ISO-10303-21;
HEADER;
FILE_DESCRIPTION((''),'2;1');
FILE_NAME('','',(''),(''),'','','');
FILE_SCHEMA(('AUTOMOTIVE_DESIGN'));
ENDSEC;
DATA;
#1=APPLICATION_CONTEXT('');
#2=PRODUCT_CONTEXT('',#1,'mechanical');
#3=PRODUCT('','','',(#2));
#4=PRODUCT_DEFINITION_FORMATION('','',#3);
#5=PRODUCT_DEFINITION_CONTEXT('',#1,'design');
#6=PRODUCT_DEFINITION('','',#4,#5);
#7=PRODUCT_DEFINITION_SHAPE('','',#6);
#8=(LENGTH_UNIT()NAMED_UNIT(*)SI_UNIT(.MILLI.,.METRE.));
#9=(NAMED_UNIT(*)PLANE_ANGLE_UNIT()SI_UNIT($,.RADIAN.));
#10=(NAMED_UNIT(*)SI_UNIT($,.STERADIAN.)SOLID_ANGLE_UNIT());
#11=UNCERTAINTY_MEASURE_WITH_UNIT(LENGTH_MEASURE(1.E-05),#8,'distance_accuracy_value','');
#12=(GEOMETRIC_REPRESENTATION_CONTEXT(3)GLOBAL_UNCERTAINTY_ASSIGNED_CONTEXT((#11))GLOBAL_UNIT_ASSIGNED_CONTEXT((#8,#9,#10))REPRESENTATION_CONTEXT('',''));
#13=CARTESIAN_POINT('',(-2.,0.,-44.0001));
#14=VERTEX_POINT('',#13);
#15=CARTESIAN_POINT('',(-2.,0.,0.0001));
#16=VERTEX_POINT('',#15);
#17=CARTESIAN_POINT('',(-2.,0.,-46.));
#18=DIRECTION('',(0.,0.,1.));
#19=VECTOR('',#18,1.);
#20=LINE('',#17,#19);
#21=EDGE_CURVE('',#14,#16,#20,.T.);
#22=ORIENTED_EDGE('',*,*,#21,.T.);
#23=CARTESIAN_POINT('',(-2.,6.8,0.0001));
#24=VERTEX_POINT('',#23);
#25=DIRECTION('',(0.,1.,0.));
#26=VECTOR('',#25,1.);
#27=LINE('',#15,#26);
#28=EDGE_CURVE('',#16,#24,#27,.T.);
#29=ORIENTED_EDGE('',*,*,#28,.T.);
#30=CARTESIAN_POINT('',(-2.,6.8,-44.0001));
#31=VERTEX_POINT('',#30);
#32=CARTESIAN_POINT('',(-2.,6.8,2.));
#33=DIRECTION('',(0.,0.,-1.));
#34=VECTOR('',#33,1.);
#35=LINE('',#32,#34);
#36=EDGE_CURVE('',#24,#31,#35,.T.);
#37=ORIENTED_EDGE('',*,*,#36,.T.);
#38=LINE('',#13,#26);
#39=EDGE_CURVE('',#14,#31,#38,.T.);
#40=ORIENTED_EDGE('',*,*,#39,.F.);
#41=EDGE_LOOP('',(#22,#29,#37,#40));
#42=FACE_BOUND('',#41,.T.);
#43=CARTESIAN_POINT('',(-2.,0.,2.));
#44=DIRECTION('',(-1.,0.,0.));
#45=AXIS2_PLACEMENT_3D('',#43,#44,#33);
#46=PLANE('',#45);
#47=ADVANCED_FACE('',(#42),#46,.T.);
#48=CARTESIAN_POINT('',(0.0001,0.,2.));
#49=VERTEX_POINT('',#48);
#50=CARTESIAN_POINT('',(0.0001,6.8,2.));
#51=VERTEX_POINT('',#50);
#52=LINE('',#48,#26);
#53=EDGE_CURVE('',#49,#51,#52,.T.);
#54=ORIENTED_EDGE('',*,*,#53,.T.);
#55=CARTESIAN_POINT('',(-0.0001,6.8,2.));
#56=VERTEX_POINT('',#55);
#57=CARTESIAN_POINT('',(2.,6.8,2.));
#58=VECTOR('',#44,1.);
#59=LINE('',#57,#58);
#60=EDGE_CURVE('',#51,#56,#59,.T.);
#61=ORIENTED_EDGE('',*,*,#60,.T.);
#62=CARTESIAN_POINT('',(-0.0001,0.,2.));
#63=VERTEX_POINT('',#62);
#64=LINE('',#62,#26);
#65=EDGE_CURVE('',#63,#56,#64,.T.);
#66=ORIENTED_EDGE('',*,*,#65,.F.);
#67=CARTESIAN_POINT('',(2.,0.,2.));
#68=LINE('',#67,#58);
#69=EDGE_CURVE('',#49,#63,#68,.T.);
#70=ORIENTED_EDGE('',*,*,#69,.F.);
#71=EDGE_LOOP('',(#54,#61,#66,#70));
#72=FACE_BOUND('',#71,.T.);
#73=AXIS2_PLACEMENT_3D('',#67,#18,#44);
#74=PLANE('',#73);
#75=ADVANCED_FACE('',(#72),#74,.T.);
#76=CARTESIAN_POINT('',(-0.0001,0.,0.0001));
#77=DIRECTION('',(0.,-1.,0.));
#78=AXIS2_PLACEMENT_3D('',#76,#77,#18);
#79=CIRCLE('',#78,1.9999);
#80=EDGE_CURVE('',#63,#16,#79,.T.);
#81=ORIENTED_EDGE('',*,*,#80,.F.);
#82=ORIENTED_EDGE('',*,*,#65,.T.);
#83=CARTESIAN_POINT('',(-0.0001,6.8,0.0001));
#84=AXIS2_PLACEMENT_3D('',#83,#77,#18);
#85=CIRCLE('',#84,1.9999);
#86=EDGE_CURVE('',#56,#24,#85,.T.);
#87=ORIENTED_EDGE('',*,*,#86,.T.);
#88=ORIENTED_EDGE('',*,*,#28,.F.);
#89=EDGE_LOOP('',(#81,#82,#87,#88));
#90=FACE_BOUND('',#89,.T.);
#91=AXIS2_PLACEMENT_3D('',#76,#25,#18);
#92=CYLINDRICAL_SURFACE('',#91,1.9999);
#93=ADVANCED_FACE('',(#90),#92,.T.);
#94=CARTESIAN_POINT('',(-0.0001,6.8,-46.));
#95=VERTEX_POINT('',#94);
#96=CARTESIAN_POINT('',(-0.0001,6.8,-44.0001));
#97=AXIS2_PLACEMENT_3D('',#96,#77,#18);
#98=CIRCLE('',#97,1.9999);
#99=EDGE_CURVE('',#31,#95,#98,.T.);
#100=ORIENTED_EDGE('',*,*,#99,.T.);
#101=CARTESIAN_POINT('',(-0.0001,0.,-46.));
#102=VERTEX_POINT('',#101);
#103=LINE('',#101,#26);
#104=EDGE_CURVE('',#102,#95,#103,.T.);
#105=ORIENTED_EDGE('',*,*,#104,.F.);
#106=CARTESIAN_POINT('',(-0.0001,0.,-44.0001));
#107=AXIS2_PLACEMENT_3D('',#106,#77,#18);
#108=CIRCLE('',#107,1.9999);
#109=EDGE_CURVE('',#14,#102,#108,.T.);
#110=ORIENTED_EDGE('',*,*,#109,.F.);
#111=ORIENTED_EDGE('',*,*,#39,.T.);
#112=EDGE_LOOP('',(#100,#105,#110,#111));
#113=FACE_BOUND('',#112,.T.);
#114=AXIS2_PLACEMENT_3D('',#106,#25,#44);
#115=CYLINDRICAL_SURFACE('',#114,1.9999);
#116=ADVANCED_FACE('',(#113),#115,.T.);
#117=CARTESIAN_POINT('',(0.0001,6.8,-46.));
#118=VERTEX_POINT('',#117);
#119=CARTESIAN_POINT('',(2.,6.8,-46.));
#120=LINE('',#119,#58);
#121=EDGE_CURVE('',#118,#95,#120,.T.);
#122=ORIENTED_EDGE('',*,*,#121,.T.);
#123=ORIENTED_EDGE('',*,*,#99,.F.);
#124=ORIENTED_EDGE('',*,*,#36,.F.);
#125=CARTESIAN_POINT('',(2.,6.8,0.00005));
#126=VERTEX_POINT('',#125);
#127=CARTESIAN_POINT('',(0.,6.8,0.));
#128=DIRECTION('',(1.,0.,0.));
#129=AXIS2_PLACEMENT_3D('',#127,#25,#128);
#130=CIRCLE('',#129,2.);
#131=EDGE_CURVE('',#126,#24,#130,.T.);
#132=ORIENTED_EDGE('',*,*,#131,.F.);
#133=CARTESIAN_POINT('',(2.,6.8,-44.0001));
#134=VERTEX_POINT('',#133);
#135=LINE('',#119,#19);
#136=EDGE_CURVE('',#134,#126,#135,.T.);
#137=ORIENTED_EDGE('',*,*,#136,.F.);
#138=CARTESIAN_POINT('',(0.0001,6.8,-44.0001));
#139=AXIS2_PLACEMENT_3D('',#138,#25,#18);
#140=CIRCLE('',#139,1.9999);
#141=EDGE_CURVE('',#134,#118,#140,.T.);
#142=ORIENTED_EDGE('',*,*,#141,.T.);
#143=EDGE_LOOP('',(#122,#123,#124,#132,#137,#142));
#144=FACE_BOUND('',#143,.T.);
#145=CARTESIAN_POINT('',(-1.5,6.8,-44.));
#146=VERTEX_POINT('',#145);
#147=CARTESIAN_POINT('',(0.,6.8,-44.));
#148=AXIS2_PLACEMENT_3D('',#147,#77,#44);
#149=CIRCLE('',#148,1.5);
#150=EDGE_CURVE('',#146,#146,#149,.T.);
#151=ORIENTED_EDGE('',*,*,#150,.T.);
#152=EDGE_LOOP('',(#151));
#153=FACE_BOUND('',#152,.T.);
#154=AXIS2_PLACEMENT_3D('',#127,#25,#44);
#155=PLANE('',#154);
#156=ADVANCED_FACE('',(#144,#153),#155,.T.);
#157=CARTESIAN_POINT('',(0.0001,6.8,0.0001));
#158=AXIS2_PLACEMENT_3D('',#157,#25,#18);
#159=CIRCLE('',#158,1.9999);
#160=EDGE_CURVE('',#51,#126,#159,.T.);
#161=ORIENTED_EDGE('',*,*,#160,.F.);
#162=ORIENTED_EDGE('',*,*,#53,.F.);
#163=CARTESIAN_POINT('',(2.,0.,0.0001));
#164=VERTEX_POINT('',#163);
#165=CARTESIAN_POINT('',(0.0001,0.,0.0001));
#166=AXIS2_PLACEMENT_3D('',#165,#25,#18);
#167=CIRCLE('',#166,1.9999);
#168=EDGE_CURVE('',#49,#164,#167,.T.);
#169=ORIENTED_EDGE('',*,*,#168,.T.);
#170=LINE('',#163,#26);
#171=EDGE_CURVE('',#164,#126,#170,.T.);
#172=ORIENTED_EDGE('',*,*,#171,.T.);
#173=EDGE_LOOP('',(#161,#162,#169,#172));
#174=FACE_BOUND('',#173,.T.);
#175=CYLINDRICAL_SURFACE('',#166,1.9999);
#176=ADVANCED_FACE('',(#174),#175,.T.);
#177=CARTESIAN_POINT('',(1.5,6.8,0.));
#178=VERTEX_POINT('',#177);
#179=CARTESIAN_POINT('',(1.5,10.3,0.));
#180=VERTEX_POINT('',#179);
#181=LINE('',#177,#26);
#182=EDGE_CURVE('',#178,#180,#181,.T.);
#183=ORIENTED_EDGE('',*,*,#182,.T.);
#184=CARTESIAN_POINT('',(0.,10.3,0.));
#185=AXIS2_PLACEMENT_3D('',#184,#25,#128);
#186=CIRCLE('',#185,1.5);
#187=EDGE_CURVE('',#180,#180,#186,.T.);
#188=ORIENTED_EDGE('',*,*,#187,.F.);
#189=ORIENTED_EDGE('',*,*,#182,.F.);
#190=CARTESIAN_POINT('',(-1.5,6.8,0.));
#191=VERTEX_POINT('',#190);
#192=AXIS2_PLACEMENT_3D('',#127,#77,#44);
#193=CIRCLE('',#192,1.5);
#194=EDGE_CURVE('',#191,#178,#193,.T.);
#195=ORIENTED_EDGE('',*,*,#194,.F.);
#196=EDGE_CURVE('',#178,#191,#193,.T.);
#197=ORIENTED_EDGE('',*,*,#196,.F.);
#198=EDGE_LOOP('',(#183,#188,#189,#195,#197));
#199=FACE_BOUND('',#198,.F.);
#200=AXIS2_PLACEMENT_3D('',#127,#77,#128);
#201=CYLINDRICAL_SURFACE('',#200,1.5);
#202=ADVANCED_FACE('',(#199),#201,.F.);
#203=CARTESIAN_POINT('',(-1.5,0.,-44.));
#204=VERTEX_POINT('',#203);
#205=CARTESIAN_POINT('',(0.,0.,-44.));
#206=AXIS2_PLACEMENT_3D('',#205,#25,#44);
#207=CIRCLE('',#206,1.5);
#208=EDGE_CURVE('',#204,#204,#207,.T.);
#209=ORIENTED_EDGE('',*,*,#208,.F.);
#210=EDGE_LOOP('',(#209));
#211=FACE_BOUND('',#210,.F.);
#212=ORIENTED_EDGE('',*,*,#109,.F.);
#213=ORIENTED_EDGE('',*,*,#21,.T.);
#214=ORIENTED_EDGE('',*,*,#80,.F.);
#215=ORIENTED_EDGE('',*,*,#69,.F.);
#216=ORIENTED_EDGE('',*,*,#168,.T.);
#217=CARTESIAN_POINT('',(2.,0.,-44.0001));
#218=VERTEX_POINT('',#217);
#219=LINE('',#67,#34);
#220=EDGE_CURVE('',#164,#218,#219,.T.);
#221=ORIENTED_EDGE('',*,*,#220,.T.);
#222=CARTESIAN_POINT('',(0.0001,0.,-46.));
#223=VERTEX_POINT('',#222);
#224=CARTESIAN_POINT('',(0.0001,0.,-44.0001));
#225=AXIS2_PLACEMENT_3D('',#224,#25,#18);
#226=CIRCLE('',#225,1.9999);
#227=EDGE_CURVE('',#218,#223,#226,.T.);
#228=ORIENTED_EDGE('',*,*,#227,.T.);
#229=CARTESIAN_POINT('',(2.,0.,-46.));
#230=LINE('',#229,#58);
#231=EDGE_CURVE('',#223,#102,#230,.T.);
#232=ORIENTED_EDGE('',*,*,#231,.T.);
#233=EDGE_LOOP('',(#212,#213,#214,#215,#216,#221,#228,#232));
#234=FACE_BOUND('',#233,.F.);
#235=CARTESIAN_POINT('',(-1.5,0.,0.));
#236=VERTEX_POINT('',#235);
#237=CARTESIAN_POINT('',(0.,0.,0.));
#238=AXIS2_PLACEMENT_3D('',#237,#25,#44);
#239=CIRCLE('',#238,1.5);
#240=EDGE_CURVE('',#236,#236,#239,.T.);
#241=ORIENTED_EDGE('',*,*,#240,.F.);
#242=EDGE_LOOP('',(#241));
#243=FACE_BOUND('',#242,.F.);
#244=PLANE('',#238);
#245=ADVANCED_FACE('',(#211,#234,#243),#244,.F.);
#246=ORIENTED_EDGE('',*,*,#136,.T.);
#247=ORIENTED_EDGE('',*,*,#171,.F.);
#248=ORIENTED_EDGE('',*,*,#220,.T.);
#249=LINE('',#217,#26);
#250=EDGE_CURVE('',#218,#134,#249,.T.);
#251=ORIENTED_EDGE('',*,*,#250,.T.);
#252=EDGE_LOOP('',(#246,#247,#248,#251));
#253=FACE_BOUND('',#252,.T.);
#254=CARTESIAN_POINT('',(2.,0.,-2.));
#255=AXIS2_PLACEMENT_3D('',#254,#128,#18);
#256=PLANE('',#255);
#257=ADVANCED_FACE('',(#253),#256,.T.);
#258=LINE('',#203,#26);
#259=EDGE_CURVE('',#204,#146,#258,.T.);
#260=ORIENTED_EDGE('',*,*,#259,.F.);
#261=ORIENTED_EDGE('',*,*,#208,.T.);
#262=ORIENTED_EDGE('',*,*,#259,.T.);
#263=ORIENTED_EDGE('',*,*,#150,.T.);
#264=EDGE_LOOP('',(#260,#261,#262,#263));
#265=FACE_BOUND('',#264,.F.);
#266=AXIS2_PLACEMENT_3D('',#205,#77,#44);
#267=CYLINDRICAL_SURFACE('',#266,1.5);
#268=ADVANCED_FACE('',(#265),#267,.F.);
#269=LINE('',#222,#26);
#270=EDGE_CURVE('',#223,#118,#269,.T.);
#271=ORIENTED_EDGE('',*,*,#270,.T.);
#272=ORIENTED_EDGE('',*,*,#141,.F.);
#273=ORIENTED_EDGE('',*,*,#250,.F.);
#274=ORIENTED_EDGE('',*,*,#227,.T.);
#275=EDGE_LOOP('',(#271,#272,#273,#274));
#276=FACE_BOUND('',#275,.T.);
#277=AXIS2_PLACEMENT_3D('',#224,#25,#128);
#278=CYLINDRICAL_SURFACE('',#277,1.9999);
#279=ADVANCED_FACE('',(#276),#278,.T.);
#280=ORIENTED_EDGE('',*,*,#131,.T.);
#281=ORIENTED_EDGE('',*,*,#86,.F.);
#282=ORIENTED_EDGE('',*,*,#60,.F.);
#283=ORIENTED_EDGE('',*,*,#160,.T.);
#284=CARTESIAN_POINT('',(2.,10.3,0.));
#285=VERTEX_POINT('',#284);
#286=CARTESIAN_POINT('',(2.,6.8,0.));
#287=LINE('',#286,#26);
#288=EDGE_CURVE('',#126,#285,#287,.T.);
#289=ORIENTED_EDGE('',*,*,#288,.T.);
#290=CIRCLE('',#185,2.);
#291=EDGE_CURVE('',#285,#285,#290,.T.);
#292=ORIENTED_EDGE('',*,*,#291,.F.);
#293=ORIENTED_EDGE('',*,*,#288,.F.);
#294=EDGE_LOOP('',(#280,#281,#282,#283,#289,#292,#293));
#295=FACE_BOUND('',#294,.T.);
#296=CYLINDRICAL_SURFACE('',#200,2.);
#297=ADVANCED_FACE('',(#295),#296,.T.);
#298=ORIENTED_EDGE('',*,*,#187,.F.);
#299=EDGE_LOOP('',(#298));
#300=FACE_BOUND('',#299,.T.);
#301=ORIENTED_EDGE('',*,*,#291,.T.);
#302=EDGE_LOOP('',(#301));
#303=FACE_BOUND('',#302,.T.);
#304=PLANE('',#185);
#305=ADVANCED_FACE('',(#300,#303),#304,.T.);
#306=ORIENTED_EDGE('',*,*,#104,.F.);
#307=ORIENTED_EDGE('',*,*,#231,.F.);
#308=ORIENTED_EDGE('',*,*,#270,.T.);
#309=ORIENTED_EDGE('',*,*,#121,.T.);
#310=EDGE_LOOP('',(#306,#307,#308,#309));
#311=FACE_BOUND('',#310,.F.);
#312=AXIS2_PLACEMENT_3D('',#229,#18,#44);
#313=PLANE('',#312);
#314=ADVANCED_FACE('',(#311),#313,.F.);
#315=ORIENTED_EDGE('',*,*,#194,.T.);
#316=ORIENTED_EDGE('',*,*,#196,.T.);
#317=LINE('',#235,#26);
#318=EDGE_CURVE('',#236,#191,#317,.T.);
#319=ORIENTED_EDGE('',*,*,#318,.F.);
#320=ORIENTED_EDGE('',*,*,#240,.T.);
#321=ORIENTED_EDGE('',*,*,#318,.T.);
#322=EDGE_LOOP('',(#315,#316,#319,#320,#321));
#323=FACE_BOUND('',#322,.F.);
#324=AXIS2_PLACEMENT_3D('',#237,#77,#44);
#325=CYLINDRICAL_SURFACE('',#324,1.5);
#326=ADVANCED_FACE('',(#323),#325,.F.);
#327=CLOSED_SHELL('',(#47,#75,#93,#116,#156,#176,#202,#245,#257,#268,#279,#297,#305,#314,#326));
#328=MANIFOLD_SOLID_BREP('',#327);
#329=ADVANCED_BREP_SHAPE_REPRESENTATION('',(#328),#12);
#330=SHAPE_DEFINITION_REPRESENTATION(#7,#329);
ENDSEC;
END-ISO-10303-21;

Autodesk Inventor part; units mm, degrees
ref_plane "YZ Plane" through (0, 0, 0) normal (1, 0, 0) x (0, 1, 0)
ref_plane "XZ Plane" through (0, 0, 0) normal (0, 1, 0) x (-1, 0, 0)
ref_plane "XY Plane" through (0, 0, 0) normal (0, 0, 1) x (1, 0, 0)
sketch "Szkic1" plane through (0, 0, 0) normal (0, 1, 0) x (-1, 0, 0)
  circle A0 centre (0, 0) radius 1.5
  line L0 (-2, 2) -> (2, 2)
  line L1 (2, 2) -> (2, -2)
  line L2 (2, -2) -> (-2, -2)
  line L3 (-2, -2) -> (-2, 2)
  line L4 (-2, 2) -> (2, -2) construction
  line L5 (2, 2) -> (-2, -2) construction
  line L6 (0, 0) -> (0, -23)
  line L7 (0, 0) -> (23, 0) construction
  line L8 (2, 2) -> (-2, 2)
  line L9 (-2, 2) -> (-2, -22)
  line L10 (-2, -22) -> (2, -22)
  line L11 (2, -22) -> (2, 2)
  circle A1 centre (0, -44) radius 1.5
  line L12 (-2, -46) -> (2, -46)
  line L13 (2, -46) -> (2, -42)
  line L14 (2, -42) -> (-2, -42)
  line L15 (-2, -42) -> (-2, -46)
  line L16 (-2, -46) -> (2, -42) construction
  line L17 (2, -46) -> (-2, -42) construction
  line L18 (0, -44) -> (0, -23)
  line L19 (0, -44) -> (23, -44) construction
  line L20 (2, -46) -> (-2, -46)
  line L21 (-2, -46) -> (-2, -22)
  line L22 (2, -22) -> (2, -46)
  dimension "d0" = 3
  dimension "d1" = 4
  dimension "d2" = 4
  dimension "d3" = 23
  dimension "d4" = 90
  dimension "d5" = 4
  dimension "d6" = 24
extrude "Wyciągnięcie proste1" add sketch "Szkic1" along normal blind 6.8
fillet "Zaokrąglenie1" radius 2 4 edges at (-2, 3.4, 2) (2, 3.4, 2) (-2, 3.4, -46) (2, 3.4, -46)
sketch "Szkic2" plane through (0, 6.8, 0) normal (0, 1, 0) x (1, 0, 0)
  circle A0 centre (0, 0) radius 1.5 projected
  circle A1 centre (0, 0) radius 1.5
  circle A2 centre (0, 0) radius 2
extrude "Wyciągnięcie proste2" add sketch "Szkic2" along normal blind 3.5
properties part number "link_sub"
